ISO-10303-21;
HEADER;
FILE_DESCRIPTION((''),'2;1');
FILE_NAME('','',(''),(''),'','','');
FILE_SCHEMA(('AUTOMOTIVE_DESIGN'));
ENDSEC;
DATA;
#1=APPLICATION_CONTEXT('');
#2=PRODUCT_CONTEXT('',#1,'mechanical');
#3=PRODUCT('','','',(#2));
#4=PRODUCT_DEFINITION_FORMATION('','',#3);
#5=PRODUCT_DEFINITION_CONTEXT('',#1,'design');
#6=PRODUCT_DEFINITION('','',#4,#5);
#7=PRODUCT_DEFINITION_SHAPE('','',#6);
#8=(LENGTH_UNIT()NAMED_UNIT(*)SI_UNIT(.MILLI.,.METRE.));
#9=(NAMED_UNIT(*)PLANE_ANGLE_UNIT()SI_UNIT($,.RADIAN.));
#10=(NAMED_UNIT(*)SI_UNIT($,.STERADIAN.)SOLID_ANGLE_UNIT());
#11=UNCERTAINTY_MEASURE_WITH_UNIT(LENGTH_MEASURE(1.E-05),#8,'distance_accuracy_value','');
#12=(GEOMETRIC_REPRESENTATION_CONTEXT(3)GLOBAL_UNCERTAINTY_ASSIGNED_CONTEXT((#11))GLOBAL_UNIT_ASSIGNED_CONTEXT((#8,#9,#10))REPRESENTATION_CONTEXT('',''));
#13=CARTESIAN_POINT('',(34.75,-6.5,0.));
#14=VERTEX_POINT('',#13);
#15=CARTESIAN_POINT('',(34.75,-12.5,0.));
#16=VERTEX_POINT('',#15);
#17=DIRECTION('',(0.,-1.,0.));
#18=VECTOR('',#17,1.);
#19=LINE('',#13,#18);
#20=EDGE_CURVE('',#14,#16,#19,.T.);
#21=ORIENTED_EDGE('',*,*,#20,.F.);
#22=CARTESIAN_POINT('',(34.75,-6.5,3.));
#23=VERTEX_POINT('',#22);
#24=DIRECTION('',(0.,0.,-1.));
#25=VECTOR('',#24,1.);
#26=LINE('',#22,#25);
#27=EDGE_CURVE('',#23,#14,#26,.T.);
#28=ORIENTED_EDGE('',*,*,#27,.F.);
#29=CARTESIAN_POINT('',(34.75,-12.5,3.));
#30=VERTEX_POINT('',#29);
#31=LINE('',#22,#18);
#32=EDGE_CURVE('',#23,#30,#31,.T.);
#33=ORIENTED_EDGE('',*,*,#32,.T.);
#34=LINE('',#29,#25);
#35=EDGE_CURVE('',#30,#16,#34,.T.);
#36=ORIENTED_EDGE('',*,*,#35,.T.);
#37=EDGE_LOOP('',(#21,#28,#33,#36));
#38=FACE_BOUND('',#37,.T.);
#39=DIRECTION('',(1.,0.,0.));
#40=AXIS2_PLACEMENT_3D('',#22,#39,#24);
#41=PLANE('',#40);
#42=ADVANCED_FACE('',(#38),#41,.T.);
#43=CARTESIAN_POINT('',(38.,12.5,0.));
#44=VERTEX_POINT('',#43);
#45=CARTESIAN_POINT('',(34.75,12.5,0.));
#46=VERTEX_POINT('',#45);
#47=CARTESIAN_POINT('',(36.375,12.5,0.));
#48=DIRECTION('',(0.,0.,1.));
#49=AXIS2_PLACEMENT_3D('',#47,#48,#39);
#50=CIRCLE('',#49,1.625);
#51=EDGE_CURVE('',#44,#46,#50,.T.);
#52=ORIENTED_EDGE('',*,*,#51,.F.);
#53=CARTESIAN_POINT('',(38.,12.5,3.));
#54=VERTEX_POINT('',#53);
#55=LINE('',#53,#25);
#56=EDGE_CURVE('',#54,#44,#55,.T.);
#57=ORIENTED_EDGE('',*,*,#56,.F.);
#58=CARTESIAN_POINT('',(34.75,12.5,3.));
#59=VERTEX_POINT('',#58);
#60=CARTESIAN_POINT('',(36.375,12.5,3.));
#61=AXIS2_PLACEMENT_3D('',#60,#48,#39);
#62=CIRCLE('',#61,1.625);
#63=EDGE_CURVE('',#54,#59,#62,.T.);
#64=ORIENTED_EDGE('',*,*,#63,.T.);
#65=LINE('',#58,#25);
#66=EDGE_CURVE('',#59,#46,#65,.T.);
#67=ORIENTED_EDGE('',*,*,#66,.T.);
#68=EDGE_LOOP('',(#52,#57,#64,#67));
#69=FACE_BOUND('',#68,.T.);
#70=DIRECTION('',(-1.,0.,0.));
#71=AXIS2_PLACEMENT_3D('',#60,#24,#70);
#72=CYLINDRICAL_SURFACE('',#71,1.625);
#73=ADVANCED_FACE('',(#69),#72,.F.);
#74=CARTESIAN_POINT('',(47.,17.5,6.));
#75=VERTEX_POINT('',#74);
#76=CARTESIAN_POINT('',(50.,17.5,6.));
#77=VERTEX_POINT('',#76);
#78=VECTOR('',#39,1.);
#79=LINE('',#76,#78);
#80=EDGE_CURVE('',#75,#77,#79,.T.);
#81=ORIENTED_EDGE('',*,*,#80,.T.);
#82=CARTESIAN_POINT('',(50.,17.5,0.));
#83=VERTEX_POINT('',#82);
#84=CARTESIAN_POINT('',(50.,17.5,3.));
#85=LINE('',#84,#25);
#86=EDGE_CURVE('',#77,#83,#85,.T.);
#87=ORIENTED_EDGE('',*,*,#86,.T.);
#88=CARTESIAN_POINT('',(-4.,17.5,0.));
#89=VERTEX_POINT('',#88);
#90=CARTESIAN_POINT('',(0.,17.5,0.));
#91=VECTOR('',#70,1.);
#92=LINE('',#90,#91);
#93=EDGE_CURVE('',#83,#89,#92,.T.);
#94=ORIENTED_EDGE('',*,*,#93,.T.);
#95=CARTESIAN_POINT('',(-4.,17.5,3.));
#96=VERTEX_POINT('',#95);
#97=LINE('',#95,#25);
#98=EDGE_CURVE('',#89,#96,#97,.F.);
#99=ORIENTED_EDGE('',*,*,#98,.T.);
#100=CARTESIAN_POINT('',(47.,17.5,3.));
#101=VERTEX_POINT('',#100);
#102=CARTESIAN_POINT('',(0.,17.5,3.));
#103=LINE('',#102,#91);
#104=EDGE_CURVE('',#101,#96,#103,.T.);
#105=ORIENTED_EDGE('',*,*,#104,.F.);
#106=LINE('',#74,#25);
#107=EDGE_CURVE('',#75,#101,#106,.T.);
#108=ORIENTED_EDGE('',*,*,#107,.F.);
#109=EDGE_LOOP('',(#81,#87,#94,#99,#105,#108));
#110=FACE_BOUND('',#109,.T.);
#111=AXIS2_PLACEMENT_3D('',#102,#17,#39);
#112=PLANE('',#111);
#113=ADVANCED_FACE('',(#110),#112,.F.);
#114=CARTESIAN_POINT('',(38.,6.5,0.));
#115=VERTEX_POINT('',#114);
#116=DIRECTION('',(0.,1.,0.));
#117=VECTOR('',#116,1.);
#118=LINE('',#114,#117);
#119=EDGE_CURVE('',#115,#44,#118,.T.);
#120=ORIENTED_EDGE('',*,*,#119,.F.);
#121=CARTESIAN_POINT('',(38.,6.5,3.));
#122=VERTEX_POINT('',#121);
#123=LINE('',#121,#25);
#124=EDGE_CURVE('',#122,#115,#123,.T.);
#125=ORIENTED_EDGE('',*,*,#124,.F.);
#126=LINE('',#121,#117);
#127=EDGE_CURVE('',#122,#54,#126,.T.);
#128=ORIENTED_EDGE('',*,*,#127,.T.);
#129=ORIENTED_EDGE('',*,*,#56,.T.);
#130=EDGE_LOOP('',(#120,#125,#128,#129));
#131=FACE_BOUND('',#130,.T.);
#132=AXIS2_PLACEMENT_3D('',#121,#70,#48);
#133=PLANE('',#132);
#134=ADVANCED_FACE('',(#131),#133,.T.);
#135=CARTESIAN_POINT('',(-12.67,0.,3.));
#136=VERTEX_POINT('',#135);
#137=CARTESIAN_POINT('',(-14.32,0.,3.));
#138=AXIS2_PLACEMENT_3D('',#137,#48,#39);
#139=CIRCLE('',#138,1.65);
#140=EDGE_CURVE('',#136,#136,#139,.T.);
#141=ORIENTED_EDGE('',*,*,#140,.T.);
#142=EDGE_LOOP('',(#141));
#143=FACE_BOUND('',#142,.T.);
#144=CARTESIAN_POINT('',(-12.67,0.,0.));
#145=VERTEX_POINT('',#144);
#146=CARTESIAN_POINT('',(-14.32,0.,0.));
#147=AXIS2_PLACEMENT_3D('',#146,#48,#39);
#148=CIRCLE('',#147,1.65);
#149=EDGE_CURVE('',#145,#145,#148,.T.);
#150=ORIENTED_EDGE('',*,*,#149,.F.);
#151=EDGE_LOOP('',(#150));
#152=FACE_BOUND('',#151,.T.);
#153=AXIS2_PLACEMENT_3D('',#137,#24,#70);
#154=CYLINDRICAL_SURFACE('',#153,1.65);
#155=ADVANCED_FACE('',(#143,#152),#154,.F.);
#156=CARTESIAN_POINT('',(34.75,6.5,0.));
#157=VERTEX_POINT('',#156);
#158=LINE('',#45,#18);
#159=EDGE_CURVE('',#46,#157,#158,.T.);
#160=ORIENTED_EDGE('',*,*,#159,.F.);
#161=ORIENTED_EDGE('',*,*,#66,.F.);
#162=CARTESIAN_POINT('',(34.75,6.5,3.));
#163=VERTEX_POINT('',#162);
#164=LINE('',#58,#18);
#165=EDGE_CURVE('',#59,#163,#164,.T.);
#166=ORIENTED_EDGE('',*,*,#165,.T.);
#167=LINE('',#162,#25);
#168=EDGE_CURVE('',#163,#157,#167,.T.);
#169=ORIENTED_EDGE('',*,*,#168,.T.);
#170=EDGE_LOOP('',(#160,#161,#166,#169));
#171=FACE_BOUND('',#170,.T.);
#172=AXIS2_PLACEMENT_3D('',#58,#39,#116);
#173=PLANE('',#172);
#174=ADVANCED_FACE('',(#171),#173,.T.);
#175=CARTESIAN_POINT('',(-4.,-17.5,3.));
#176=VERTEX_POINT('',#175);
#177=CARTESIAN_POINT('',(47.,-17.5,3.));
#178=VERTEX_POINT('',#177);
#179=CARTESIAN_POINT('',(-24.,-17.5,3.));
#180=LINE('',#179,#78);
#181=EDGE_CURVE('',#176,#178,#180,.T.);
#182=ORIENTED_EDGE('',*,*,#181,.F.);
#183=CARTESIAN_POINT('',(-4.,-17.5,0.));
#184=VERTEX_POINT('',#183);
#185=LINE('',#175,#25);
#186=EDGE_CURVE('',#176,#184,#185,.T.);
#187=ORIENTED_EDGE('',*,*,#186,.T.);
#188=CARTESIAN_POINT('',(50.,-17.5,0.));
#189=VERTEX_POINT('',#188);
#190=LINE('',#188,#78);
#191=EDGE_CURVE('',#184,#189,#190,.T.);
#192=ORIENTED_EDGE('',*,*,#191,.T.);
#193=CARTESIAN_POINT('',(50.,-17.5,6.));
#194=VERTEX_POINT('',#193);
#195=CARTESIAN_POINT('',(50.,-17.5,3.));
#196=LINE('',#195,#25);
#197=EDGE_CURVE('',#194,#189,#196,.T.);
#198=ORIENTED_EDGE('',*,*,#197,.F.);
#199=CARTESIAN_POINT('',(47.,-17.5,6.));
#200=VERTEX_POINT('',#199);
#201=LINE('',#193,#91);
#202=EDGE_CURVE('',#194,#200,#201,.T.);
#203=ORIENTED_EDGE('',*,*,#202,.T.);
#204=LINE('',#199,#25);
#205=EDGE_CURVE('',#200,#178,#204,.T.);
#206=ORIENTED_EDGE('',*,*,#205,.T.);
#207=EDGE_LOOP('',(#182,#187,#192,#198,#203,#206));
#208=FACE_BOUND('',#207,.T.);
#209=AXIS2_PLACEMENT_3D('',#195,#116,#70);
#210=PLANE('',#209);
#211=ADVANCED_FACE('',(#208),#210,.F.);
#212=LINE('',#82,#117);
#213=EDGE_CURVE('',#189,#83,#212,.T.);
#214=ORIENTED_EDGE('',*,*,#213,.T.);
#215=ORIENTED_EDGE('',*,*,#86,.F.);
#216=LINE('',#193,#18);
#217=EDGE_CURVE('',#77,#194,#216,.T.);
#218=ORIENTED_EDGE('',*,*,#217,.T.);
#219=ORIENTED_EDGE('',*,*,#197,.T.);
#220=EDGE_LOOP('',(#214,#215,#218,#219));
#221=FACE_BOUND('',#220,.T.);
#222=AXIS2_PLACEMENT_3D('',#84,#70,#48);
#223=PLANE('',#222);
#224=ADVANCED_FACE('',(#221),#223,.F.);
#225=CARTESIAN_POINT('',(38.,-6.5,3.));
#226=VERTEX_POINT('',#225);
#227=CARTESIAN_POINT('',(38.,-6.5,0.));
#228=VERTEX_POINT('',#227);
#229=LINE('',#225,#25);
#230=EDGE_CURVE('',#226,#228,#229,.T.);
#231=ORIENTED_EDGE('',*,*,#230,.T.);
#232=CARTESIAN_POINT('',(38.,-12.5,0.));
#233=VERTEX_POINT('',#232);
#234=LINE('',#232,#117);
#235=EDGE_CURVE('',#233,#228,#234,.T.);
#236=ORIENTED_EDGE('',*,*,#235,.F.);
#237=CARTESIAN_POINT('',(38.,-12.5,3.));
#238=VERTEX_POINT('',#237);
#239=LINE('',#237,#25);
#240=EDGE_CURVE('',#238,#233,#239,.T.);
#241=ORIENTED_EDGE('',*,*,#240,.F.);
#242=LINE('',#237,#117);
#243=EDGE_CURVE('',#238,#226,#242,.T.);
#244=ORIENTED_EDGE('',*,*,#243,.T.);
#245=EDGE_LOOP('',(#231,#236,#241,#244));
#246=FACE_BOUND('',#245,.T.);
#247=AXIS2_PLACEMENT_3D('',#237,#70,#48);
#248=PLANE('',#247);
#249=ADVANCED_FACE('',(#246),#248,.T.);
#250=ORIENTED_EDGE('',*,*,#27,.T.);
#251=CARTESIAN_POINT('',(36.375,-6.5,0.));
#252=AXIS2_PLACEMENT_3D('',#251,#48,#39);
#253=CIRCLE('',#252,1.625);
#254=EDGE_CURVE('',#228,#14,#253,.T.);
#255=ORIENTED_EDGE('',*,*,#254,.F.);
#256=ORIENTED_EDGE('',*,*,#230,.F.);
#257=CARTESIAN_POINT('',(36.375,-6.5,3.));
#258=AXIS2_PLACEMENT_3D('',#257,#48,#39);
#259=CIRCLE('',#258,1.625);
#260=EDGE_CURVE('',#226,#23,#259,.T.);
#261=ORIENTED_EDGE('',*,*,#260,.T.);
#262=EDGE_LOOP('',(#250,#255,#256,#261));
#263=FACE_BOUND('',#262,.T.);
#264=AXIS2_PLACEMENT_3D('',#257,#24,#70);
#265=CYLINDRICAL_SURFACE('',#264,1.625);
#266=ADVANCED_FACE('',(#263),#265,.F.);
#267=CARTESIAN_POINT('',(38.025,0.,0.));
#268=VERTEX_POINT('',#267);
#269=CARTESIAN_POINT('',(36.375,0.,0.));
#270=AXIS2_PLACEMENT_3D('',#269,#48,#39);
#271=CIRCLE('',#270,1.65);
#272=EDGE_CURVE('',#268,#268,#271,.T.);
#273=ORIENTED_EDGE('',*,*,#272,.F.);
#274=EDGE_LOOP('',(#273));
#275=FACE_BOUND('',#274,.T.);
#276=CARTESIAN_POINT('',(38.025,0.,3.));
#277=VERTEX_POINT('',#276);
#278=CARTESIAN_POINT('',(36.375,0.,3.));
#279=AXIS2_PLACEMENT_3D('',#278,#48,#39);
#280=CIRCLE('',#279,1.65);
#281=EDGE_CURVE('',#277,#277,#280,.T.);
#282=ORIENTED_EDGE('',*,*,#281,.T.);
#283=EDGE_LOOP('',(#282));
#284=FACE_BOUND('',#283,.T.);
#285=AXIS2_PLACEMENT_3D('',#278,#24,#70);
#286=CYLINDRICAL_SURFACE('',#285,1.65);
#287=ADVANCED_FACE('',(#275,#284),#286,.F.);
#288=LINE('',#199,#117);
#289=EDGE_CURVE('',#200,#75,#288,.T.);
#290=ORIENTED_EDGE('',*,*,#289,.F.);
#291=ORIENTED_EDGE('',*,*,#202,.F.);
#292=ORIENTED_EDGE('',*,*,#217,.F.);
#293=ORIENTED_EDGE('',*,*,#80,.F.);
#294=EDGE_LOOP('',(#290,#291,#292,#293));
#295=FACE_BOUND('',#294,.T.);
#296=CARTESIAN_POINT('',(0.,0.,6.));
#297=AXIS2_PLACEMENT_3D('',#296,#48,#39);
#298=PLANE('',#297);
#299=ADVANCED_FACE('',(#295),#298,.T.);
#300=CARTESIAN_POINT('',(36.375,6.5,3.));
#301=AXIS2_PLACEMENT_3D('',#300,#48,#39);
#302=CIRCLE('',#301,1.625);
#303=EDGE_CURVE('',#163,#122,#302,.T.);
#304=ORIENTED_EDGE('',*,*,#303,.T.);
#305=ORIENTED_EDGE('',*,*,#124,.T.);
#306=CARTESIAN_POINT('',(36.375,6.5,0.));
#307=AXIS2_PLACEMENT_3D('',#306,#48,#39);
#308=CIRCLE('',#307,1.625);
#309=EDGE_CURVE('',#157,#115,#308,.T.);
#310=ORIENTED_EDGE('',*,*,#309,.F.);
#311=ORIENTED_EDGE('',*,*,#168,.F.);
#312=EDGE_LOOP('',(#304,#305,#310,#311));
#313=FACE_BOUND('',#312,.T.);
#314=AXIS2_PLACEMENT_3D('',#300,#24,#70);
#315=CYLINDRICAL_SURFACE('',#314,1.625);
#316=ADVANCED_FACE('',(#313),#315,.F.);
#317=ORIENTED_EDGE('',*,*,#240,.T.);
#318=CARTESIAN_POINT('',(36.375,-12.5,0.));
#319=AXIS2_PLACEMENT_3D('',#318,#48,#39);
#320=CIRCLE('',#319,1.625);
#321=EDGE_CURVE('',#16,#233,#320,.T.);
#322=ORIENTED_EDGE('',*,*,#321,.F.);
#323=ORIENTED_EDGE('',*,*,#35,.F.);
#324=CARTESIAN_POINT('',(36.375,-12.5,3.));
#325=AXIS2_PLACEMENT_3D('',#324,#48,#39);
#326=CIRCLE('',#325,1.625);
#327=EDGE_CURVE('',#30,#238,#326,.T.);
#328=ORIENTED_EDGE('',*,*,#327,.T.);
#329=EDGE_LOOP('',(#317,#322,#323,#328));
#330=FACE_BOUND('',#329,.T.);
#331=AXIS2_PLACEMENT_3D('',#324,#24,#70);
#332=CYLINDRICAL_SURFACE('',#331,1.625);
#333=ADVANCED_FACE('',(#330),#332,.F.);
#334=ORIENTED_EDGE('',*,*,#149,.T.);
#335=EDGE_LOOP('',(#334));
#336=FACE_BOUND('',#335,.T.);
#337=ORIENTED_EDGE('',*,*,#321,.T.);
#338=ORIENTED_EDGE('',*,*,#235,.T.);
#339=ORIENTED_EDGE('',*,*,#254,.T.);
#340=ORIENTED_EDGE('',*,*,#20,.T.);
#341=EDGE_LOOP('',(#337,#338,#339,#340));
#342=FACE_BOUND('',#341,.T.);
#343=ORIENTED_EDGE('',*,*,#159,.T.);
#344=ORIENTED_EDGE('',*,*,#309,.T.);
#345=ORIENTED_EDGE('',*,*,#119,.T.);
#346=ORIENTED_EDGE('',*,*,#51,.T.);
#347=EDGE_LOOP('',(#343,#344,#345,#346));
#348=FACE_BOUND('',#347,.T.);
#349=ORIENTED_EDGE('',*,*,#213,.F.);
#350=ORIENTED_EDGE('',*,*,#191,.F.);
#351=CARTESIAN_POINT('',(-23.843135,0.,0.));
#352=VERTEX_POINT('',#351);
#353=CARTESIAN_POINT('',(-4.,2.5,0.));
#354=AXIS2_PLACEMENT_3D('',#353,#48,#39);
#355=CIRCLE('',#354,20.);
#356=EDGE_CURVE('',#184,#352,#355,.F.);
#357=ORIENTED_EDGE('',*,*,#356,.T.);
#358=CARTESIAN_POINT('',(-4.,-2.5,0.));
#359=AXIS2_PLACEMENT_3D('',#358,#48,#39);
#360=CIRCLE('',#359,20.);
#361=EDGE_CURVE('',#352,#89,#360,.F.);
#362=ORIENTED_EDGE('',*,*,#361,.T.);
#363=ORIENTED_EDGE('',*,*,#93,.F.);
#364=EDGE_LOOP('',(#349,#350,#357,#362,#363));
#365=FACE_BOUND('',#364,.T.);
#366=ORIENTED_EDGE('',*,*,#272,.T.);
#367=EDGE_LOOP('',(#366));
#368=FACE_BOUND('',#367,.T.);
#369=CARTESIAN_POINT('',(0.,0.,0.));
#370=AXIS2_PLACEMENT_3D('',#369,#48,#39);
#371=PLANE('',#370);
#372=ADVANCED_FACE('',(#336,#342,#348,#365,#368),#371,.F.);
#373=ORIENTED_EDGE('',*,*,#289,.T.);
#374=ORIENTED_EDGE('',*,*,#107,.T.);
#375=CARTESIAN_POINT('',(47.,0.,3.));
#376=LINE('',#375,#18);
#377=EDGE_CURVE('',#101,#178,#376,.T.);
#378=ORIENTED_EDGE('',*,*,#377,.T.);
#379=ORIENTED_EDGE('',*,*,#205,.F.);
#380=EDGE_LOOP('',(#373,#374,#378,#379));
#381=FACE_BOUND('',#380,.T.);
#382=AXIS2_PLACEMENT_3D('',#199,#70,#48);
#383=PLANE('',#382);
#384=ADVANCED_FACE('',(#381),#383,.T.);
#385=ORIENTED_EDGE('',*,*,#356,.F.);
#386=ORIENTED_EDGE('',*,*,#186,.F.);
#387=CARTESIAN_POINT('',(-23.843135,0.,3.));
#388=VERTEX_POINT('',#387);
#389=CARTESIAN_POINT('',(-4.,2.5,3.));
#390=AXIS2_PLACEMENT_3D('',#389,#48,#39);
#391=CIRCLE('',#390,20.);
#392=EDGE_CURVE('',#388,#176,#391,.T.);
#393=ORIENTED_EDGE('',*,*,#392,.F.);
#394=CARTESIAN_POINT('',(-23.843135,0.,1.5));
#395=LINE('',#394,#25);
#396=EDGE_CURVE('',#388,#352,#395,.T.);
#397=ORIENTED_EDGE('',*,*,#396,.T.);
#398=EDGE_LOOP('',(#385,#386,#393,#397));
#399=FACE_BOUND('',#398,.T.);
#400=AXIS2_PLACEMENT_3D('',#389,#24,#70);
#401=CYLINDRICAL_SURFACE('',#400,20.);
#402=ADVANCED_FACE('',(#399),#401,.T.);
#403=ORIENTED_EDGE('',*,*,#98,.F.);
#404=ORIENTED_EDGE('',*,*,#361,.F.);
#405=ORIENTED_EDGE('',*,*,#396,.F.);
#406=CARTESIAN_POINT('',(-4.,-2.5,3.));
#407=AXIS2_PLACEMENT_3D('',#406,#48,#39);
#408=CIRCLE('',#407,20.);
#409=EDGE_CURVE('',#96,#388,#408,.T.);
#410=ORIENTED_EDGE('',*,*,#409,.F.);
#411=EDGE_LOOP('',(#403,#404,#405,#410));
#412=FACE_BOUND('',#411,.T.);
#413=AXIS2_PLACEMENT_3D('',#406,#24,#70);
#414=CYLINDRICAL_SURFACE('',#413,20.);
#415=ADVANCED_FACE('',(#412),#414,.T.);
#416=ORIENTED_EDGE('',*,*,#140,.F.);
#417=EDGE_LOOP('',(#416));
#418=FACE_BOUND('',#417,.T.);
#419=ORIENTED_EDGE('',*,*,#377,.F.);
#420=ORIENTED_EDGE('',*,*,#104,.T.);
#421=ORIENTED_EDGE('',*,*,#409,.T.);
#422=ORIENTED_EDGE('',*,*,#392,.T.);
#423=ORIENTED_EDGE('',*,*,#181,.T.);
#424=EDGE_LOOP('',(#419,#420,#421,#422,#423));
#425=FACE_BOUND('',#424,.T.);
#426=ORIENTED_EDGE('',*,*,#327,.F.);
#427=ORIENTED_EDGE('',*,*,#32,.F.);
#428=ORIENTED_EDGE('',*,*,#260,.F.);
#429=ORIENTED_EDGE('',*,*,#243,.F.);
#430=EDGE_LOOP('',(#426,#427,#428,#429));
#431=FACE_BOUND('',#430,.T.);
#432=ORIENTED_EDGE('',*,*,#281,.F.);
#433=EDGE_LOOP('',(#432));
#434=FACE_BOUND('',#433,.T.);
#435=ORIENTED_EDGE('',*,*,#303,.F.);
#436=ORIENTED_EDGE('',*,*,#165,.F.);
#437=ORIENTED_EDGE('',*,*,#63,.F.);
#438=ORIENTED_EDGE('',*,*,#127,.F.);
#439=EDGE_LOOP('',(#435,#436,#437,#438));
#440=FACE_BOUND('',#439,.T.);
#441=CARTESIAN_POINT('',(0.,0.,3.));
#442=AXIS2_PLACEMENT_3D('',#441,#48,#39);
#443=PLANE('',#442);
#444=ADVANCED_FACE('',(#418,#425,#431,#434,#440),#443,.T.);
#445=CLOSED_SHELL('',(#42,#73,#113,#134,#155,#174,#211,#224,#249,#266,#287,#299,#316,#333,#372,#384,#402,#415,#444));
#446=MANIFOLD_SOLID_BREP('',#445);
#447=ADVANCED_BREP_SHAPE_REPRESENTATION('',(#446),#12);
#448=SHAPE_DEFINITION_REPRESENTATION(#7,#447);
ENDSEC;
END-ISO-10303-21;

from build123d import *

# Parameters (mm, degrees)
SKETCH_1_R      = 1.65
EXTRUDE_1_DEPTH = 3
FILLET_1_R      = 20
SKETCH_4_W      = 3
SKETCH_4_H      = 35
EXTRUDE_2_DEPTH = 6


with BuildPart() as part:
    # 草图1 → 凸台-拉伸1 (new body)
    with BuildSketch(Plane.XY):
        Polygon((0, 17.5), (50, 17.5), (50, -17.5), (0, -17.5), (-24, -17.5), (-24, 17.5), align=None)
        with Locations((36.375, 0)):
            Circle(SKETCH_1_R, mode=Mode.SUBTRACT)
        with Locations((-14.32, 0)):
            Circle(SKETCH_1_R, mode=Mode.SUBTRACT)
        with BuildLine():
            Line((34.75, 12.5), (34.75, 6.5))
            ThreePointArc((34.75, 6.5), (36.375, 4.875), (38, 6.5))
            Line((38, 6.5), (38, 12.5))
            ThreePointArc((38, 12.5), (36.375, 14.125), (34.75, 12.5))
        make_face(mode=Mode.SUBTRACT)
        with BuildLine():
            Line((34.75, -6.5), (34.75, -12.5))
            ThreePointArc((34.75, -12.5), (36.375, -14.125), (38, -12.5))
            Line((38, -12.5), (38, -6.5))
            ThreePointArc((38, -6.5), (36.375, -4.875), (34.75, -6.5))
        make_face(mode=Mode.SUBTRACT)
    extrude(amount=EXTRUDE_1_DEPTH)

    # 圆角1
    # the kernel refuses this fillet: 20 mm, written as the material it takes off along each edge
    with BuildSketch(Plane(origin=(-24, -17.5, -50), x_dir=(1, 0, 0), z_dir=(0, 0, 1))) as fillet_1_piece_1:
        with BuildLine():
            CenterArc((FILLET_1_R, FILLET_1_R), FILLET_1_R, 180, 90)
            Line((0, FILLET_1_R), (0, 0))
            Line((0, 0), (FILLET_1_R, 0))
        make_face()
    extrude(amount=103, mode=Mode.SUBTRACT)
    with BuildSketch(Plane(origin=(-24, 17.5, -50), x_dir=(1, 0, 0), z_dir=(0, 0, 1))) as fillet_1_piece_2:
        with BuildLine():
            CenterArc((FILLET_1_R, -FILLET_1_R), FILLET_1_R, 90, 90)
            Line((0, -FILLET_1_R), (0, 0))
            Line((0, 0), (FILLET_1_R, 0))
        make_face()
    extrude(amount=103, mode=Mode.SUBTRACT)

    # 草图4 → 凸台-拉伸2 (add)
    with BuildSketch(Plane(origin=(0, 0, 0), x_dir=(-1, 0, 0), z_dir=(0, 0, -1))):
        with Locations((-48.5, 0)):
            Rectangle(SKETCH_4_W, SKETCH_4_H)
    extrude(amount=-EXTRUDE_2_DEPTH)


solid = part.part
